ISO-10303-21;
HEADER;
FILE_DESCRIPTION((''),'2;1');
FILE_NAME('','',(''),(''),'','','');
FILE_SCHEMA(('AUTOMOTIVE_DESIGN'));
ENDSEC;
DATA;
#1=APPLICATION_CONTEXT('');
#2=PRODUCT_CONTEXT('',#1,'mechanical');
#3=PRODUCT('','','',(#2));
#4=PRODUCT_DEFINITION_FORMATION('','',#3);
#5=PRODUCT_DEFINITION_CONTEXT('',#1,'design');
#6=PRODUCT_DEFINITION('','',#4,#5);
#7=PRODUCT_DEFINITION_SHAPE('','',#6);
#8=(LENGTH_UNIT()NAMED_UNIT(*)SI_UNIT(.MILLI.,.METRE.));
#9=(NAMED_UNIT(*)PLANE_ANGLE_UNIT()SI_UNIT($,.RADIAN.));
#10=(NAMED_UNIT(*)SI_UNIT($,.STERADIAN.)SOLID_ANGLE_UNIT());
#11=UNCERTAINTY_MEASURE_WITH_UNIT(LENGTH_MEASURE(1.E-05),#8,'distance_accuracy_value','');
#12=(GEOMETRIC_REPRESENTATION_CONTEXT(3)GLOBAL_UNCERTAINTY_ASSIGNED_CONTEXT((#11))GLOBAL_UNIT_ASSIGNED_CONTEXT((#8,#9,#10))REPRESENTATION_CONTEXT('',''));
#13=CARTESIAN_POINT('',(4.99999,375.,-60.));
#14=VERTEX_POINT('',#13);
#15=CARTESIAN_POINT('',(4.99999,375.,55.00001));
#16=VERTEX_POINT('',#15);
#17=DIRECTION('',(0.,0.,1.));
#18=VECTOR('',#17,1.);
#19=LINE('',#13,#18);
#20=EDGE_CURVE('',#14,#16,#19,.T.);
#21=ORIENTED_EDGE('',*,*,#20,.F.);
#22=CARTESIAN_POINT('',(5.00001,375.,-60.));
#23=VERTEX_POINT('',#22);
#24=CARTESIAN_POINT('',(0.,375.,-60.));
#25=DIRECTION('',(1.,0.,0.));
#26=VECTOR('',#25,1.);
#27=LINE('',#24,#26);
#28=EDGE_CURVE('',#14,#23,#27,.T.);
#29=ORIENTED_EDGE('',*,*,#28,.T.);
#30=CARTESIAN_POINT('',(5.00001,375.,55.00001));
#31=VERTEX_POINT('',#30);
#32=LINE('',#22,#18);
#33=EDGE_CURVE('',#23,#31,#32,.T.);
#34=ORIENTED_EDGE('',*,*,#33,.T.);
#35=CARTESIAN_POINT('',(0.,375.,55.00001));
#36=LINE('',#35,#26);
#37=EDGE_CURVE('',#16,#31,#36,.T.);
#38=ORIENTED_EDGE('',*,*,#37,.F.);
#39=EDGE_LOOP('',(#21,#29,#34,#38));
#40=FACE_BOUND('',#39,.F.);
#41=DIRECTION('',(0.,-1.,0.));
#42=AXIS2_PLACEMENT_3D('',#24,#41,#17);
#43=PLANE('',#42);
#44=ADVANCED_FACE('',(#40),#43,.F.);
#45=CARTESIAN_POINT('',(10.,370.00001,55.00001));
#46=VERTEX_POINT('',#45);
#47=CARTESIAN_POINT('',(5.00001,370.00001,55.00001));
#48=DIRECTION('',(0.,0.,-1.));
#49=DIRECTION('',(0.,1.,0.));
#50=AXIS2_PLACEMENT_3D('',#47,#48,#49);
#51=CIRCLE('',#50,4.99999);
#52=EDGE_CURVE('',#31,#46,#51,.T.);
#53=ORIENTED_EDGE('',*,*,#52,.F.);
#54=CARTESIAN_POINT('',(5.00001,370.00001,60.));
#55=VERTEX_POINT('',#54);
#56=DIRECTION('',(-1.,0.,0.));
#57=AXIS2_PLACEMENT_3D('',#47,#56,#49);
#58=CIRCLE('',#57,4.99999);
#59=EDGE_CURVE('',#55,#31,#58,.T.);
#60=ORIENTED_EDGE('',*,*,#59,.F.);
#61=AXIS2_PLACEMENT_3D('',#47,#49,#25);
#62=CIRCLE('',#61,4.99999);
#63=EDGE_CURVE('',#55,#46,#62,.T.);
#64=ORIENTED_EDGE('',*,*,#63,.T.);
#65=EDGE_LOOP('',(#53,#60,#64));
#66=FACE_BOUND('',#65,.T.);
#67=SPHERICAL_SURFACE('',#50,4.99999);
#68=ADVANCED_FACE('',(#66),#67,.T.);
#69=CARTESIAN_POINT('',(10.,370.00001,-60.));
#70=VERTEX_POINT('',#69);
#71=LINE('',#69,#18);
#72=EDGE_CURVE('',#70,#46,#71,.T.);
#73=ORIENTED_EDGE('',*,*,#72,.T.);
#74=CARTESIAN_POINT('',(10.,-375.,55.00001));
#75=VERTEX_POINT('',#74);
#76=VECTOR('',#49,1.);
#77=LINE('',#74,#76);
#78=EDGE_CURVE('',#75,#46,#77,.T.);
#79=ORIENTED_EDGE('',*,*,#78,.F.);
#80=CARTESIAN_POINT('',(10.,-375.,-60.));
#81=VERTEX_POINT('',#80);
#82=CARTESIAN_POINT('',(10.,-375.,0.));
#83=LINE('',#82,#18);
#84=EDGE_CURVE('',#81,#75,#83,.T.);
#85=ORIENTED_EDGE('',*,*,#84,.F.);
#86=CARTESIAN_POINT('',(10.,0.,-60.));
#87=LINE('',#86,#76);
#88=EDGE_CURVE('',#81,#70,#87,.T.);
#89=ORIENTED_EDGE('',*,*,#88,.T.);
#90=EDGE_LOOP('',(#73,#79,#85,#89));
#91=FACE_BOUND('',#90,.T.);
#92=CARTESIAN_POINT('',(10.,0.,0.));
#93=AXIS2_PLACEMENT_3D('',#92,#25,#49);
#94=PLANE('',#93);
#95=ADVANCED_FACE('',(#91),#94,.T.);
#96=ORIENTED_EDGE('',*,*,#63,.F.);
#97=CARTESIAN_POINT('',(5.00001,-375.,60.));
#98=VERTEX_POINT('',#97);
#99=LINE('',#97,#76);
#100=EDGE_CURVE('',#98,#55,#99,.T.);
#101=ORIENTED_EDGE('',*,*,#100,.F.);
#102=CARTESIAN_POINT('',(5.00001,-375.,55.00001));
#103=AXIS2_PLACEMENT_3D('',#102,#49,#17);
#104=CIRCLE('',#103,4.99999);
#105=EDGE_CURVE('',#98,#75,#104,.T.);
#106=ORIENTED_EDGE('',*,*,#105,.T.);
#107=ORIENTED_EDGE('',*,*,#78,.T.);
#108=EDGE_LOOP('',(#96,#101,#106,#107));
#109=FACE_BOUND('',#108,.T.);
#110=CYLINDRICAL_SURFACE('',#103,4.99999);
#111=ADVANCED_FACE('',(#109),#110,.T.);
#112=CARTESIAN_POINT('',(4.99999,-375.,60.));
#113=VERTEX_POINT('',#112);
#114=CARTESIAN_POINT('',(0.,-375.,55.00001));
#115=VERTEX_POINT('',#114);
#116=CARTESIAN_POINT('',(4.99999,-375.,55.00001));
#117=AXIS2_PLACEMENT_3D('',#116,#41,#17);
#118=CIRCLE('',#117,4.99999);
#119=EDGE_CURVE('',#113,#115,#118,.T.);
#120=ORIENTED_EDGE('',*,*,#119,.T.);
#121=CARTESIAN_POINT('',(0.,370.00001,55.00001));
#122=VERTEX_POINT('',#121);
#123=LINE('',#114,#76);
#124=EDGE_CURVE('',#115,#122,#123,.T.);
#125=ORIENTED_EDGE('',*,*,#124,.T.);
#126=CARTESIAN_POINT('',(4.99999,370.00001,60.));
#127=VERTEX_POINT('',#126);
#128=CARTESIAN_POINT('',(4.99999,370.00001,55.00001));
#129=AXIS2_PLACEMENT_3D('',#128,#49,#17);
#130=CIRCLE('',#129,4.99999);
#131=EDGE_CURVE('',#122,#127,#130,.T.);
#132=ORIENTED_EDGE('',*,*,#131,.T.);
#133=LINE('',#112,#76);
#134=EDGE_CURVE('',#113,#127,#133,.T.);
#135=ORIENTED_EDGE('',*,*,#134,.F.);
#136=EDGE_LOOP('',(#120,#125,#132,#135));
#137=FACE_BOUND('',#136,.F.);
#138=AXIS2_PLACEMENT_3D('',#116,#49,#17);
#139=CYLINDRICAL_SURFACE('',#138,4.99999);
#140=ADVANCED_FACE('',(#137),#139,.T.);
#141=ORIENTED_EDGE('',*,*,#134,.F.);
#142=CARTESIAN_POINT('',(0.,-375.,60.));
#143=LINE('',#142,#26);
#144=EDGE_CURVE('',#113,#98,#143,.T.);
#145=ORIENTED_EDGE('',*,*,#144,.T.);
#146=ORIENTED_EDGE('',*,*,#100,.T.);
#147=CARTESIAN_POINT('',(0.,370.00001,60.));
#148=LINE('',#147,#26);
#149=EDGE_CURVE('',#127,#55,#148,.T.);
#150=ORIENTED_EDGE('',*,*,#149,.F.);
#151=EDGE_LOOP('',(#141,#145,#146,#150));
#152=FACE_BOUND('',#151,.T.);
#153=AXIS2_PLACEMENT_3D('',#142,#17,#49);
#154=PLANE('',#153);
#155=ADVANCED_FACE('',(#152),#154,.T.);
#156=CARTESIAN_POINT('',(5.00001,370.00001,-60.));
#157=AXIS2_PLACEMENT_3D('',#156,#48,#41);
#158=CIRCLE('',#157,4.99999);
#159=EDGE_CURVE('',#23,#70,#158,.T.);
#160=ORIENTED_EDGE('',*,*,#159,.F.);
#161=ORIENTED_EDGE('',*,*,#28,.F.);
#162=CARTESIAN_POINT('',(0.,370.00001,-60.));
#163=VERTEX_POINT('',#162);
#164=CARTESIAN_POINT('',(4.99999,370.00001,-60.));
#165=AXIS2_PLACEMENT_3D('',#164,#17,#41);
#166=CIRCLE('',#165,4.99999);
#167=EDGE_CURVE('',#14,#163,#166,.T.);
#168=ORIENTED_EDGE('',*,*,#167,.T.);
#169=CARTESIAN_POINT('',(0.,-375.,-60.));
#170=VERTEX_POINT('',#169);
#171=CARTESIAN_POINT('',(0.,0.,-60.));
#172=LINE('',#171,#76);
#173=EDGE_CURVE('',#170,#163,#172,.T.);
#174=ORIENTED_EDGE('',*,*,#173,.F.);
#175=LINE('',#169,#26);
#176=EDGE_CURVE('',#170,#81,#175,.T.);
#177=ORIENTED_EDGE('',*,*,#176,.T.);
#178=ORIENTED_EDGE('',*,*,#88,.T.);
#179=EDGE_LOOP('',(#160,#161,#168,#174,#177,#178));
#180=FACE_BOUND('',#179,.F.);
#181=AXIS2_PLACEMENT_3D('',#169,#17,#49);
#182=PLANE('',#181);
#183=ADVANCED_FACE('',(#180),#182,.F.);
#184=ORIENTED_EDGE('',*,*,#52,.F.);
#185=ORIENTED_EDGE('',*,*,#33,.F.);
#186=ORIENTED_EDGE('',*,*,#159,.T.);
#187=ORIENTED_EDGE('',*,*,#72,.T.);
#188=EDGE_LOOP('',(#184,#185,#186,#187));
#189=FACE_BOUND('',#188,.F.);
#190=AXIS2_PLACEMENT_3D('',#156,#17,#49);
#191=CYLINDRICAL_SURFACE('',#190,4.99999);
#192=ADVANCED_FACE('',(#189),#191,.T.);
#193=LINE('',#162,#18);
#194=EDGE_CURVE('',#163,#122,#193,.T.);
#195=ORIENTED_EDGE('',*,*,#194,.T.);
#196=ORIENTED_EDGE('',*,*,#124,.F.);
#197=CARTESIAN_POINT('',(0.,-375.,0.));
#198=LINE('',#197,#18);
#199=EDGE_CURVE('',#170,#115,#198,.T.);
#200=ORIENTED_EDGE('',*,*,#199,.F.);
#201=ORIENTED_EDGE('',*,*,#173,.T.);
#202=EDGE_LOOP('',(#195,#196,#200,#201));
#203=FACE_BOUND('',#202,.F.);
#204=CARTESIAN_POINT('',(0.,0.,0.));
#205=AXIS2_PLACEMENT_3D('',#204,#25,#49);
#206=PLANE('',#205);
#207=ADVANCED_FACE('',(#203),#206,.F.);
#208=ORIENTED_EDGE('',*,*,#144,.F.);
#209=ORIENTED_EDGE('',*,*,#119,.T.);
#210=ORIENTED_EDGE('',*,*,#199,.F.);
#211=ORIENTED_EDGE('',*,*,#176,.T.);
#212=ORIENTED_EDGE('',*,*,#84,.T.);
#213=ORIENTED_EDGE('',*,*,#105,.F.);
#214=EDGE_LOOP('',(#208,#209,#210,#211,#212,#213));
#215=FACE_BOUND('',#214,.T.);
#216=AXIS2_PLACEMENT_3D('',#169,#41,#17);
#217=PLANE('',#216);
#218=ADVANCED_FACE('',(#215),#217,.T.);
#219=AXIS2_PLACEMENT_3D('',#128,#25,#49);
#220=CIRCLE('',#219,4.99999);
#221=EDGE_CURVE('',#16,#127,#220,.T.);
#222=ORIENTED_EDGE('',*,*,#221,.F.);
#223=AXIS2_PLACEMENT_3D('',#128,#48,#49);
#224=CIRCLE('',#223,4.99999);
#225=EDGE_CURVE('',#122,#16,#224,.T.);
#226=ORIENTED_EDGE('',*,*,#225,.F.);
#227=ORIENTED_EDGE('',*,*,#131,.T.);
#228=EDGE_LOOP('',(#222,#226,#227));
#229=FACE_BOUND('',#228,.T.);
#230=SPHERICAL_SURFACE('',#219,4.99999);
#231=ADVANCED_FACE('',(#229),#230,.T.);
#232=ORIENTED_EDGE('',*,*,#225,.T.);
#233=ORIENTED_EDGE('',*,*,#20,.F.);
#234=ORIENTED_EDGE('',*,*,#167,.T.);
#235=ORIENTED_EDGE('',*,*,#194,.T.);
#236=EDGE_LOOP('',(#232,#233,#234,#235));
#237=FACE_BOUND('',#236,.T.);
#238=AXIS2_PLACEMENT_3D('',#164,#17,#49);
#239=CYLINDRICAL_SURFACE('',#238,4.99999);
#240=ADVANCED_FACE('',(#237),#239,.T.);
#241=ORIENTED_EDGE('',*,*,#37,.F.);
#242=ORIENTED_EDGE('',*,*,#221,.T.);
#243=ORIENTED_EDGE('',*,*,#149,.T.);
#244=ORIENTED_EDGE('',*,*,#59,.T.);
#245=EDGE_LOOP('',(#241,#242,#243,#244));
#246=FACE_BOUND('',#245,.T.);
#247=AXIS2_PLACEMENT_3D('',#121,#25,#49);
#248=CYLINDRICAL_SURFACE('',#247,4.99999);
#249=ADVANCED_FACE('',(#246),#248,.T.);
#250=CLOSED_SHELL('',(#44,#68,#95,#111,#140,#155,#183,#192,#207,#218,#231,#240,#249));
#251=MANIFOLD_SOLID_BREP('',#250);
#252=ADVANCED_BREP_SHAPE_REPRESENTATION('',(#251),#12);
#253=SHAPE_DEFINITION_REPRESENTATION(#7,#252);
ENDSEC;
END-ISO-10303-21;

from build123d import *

# Parameters (mm, degrees)
F0_W     = 750
F0_H     = 120
F1_DEPTH = 10
F2_R     = 4.99999


# Not quite as in the source:
# - a fillet or chamfer is up to 0.001 mm smaller than in the source, because OpenCascade refuses the exact size


with BuildPart() as f1:
    # F0 (on Right) → F1 (new body)
    with BuildSketch(Plane.YZ):
        Rectangle(F0_W, F0_H)
    extrude(amount=F1_DEPTH)

    # F2 (radius 5 in the source; OpenCascade refuses exactly that, so slightly less here)
    f2_edges = [f1.edges().sort_by_distance(p)[0] for p in [
        (10, 375, 0),
        (5, 375, 60),
        (0, 375, 0),
        (0, 0, 60),
        (10, 0, 60),
    ]]
    fillet(f2_edges, radius=F2_R)


solid = f1.part
